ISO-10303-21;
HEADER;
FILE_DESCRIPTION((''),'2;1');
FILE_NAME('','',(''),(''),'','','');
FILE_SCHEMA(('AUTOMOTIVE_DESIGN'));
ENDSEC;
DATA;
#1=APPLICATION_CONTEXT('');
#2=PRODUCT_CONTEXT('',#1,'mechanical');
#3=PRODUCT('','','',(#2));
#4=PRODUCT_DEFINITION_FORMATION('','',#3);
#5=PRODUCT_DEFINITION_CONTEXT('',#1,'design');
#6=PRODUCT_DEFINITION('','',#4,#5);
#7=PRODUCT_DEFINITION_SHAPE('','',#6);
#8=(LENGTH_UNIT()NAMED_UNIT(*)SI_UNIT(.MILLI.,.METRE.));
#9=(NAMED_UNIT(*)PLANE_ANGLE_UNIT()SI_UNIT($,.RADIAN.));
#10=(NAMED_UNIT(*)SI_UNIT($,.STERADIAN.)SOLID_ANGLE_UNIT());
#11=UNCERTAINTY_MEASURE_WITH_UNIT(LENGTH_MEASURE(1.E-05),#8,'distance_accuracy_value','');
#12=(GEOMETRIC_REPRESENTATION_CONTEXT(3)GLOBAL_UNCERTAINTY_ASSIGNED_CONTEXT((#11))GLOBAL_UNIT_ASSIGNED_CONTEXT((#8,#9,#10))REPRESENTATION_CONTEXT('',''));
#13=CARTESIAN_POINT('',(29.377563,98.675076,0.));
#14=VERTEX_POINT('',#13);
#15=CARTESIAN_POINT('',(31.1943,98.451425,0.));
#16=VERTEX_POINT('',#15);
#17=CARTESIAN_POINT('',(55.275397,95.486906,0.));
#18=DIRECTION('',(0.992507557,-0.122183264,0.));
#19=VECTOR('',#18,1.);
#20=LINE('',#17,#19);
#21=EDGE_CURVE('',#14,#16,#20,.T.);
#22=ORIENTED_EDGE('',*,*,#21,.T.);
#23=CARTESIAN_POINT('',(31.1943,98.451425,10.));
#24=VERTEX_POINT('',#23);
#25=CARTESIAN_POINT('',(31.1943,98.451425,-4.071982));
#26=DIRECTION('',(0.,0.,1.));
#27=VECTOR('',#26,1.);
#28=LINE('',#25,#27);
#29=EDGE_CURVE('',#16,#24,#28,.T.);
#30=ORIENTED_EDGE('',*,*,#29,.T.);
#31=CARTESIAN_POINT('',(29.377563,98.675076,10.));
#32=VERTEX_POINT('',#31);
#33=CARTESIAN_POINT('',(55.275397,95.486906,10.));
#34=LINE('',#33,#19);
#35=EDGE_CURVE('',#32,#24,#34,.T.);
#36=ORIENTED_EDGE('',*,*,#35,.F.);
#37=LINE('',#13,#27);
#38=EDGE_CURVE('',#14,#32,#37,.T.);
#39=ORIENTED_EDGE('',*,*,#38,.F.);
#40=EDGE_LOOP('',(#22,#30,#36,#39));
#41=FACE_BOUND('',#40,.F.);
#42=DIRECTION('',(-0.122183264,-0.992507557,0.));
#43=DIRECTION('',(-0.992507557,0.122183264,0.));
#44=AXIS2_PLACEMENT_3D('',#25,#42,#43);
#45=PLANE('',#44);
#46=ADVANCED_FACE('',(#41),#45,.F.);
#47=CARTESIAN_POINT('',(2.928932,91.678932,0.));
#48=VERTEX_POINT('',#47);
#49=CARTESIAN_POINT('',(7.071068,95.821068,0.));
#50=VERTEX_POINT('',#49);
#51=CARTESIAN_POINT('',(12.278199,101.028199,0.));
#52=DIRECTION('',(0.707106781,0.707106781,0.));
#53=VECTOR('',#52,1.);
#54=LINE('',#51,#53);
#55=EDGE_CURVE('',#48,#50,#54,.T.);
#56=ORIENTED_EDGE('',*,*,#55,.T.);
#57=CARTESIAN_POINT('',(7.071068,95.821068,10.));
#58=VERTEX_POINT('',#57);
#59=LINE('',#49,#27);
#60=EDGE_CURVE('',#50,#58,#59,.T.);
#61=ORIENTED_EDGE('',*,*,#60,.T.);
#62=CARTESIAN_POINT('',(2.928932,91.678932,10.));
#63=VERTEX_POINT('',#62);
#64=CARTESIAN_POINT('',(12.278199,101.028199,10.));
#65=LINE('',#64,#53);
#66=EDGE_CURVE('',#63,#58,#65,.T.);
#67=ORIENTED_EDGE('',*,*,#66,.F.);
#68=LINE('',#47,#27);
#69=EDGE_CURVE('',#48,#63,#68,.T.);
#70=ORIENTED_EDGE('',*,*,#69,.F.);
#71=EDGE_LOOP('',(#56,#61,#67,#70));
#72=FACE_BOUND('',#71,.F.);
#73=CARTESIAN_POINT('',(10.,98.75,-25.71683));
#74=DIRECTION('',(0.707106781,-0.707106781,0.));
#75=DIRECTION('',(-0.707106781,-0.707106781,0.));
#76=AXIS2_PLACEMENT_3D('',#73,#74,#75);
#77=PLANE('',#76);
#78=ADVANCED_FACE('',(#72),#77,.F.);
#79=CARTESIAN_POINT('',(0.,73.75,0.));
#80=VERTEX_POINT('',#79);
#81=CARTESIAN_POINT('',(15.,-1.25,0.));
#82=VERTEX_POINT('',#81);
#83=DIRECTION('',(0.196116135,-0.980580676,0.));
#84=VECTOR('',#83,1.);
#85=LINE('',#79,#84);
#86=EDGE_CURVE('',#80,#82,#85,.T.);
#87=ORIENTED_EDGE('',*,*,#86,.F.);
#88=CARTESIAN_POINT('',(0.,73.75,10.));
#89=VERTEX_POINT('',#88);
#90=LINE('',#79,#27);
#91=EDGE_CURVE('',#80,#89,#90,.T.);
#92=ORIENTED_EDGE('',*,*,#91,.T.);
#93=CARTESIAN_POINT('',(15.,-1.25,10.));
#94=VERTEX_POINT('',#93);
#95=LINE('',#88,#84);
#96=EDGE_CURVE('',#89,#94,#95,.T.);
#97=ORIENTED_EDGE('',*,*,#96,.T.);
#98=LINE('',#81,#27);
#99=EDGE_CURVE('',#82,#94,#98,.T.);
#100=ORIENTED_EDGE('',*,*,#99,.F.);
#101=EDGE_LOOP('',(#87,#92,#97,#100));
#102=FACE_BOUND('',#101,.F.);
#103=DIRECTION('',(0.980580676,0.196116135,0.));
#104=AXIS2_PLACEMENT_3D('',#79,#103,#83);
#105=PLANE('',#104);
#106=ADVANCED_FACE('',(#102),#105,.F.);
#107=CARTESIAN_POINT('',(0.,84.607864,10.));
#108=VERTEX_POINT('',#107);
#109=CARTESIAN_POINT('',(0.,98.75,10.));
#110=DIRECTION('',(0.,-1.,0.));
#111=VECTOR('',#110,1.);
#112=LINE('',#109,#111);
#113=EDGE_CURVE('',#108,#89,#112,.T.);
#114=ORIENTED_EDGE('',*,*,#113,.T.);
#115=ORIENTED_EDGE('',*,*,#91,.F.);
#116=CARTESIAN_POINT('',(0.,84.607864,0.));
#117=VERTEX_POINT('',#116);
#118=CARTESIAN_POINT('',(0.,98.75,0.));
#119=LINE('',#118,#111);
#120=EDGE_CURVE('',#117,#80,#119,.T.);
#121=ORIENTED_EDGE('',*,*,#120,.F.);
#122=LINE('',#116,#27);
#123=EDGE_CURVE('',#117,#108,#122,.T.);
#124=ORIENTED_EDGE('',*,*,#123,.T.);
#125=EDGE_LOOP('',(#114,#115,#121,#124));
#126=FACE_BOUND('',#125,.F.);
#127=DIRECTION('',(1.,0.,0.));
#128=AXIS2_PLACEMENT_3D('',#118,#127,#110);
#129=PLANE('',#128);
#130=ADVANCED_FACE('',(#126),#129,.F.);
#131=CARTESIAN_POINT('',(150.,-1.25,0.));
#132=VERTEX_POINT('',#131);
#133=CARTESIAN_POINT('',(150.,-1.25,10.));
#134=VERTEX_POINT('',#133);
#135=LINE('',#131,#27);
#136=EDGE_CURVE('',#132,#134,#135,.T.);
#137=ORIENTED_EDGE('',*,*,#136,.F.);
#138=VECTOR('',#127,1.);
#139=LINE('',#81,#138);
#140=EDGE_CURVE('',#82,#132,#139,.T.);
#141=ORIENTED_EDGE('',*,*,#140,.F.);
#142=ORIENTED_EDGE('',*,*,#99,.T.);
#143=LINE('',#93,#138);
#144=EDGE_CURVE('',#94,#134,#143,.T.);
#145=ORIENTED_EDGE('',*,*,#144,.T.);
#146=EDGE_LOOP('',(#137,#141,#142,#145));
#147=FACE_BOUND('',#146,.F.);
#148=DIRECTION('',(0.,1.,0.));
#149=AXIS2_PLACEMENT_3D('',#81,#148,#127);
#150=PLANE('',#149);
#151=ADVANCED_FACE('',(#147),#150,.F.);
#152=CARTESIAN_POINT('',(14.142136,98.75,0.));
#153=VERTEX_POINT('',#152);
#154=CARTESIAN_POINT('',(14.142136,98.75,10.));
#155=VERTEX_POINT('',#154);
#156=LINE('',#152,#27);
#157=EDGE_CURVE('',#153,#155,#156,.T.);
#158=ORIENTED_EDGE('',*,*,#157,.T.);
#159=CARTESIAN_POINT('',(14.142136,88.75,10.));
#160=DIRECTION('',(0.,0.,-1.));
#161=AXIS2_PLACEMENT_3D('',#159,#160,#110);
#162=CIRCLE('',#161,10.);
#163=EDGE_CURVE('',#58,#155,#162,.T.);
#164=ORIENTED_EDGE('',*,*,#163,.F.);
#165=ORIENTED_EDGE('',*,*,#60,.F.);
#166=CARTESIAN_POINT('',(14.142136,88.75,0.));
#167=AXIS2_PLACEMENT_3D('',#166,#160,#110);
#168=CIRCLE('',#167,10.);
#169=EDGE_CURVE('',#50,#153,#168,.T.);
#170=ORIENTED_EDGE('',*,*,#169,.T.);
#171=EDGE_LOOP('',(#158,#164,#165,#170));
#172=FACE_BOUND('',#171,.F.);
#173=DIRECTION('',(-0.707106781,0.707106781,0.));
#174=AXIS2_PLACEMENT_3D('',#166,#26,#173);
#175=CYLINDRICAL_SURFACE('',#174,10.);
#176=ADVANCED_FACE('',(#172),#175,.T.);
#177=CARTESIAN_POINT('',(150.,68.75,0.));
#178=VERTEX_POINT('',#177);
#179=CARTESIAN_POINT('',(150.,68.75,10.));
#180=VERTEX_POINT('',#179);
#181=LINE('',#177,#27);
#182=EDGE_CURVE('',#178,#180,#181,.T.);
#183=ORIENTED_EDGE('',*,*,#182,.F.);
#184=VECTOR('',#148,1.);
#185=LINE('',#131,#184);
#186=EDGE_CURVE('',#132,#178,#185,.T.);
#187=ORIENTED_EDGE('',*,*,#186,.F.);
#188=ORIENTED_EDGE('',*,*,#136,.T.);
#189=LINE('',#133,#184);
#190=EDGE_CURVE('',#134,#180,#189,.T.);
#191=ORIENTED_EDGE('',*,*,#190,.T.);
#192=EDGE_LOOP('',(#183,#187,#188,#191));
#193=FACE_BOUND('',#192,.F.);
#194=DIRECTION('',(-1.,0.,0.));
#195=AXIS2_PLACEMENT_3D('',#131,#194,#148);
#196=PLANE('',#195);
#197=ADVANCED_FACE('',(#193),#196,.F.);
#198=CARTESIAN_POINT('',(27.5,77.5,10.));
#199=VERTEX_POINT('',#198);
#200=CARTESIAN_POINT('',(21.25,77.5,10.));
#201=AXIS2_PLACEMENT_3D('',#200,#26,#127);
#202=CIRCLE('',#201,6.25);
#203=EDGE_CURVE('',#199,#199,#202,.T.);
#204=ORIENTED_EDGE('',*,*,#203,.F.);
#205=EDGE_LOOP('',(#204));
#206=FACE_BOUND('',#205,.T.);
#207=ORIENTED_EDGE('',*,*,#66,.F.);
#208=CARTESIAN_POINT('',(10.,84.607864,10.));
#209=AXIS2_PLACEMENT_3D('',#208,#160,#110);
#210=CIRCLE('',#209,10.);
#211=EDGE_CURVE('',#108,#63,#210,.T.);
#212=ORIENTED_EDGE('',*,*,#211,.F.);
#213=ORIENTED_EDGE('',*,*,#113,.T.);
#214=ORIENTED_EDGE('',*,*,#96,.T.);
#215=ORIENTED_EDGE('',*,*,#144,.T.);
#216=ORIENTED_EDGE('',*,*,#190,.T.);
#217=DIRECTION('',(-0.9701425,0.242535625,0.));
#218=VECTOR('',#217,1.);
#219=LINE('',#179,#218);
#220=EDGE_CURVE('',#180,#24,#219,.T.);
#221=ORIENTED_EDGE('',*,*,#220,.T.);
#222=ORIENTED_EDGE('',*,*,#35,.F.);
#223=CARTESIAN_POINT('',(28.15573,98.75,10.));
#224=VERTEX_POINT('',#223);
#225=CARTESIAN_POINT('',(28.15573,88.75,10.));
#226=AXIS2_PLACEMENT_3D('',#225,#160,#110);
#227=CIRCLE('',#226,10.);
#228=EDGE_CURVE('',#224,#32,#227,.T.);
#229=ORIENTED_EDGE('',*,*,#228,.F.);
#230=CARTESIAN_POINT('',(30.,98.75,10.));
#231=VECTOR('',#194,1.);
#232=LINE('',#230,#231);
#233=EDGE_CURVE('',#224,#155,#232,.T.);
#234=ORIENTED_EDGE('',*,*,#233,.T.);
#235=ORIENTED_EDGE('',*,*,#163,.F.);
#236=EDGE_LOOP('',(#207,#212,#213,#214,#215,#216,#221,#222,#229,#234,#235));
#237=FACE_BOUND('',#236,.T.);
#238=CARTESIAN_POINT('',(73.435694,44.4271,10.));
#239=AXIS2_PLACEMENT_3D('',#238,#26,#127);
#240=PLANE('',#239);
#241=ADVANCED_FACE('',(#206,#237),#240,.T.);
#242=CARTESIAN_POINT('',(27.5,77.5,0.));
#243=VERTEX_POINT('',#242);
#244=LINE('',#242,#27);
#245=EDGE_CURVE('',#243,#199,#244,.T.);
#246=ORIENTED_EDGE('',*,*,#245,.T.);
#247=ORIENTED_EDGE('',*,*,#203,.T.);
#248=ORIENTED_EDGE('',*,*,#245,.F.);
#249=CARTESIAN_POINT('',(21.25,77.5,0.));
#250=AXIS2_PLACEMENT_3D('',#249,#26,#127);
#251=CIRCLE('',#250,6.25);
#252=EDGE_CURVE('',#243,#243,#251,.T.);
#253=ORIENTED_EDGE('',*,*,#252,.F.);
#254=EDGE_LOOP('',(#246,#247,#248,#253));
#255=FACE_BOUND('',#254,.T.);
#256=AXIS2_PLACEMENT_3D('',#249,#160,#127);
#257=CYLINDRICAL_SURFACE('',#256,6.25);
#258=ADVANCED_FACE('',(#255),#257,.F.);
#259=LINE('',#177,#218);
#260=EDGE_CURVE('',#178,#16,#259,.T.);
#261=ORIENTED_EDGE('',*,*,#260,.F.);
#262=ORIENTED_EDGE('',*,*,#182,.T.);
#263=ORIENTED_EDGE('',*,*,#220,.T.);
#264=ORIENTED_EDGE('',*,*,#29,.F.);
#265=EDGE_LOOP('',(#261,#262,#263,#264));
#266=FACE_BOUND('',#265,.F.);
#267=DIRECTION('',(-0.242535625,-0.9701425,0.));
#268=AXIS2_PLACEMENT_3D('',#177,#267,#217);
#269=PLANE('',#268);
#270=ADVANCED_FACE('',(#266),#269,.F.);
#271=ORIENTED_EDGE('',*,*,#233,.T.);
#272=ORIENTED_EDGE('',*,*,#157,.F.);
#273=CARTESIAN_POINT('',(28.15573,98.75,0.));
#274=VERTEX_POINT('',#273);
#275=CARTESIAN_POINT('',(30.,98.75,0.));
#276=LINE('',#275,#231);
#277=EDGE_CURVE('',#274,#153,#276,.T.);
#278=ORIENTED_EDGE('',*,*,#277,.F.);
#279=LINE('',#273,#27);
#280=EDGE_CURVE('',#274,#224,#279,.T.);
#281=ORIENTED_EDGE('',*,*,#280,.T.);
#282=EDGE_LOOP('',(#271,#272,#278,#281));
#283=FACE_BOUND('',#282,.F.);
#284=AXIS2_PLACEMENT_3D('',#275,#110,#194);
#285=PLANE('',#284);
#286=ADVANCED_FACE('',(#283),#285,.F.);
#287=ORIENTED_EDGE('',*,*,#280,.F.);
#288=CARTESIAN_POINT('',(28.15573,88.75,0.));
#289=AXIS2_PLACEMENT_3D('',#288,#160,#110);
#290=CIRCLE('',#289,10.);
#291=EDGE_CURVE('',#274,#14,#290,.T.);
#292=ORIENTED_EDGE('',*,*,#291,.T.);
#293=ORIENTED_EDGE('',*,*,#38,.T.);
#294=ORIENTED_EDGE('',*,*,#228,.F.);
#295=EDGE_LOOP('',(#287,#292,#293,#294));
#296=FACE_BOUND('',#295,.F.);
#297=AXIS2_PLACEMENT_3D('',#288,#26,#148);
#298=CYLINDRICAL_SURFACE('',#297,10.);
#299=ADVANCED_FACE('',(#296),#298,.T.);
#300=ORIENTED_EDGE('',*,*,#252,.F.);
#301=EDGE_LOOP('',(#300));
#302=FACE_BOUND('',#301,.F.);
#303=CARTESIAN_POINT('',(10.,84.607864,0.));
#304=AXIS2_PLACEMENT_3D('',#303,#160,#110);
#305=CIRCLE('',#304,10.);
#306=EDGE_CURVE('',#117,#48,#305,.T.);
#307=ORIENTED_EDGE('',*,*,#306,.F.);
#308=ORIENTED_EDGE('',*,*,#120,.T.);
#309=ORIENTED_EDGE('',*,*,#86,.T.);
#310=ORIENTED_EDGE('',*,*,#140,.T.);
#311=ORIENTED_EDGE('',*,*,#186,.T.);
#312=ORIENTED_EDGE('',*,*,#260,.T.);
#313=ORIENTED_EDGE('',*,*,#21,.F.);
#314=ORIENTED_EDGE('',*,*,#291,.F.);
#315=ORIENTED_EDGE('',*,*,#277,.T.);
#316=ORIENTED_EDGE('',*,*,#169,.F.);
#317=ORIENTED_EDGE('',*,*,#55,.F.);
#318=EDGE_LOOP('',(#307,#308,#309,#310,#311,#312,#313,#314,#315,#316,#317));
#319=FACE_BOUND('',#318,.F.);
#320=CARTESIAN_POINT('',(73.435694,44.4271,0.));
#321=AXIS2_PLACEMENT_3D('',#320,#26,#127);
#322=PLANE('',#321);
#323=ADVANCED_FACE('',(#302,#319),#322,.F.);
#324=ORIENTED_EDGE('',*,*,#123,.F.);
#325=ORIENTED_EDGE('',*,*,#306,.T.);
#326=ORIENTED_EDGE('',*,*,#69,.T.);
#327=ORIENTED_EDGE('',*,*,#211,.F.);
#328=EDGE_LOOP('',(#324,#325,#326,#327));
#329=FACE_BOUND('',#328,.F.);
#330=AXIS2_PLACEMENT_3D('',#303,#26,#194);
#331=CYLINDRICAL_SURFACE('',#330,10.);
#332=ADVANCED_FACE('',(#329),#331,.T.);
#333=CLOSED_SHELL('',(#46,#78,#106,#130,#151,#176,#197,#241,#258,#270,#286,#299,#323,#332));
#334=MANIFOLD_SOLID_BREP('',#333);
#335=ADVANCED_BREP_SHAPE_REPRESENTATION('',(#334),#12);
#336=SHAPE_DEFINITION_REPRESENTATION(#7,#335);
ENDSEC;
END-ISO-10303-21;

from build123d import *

# Parameters (mm, degrees)
F0_R        = 6.25
F1_DEPTH    = 10
F2_T1_DEPTH = 18.1439634323
F2_T3_DEPTH = 61.4336597593
F3_R        = 10


# Not quite as in the source:
# - a fillet or chamfer that OpenCascade refuses, or shapes differently, is made with other operations: its cross-section is extruded or revolved along the edge and cut away or added
# - two fillets or chamfers of one size are made in one step


with BuildPart() as f1:
    # F0 (on Top) → F1 (new body)
    with BuildSketch(Plane.XY):
        Polygon((0, 73.75), (15, -1.25), (150, -1.25), (150, 68.75), (30, 98.75), (0, 98.75), align=None)
        with Locations((21.25, 77.5)):
            Circle(F0_R, mode=Mode.SUBTRACT)
    extrude(amount=F1_DEPTH)

    # F2: chamfer of 10 on 2 edges, made by hand

    # F2_s2 → F2_t1 (cut)
    with BuildSketch(Plane.XY.offset(-4.0719817161)):
        Polygon((31.1942999942, 98.4514250015), (28.7689437438, 98.75), (30, 98.75), align=None)
    extrude(amount=F2_T1_DEPTH, mode=Mode.SUBTRACT)

    # F2_s4 → F2_t3 (cut)
    with BuildSketch(Plane.XY.offset(-25.7168298797)):
        Polygon((10, 98.75), (0, 88.75), (0, 98.75), align=None)
    extrude(amount=F2_T3_DEPTH, mode=Mode.SUBTRACT)

    # F3
    f3_edges = [f1.edges().sort_by_distance(p)[0] for p in [
        (0, 88.75, 5),
        (10, 98.75, 5),
        (28.768944, 98.75, 5),
    ]]
    fillet(f3_edges, radius=F3_R)


solid = f1.part
